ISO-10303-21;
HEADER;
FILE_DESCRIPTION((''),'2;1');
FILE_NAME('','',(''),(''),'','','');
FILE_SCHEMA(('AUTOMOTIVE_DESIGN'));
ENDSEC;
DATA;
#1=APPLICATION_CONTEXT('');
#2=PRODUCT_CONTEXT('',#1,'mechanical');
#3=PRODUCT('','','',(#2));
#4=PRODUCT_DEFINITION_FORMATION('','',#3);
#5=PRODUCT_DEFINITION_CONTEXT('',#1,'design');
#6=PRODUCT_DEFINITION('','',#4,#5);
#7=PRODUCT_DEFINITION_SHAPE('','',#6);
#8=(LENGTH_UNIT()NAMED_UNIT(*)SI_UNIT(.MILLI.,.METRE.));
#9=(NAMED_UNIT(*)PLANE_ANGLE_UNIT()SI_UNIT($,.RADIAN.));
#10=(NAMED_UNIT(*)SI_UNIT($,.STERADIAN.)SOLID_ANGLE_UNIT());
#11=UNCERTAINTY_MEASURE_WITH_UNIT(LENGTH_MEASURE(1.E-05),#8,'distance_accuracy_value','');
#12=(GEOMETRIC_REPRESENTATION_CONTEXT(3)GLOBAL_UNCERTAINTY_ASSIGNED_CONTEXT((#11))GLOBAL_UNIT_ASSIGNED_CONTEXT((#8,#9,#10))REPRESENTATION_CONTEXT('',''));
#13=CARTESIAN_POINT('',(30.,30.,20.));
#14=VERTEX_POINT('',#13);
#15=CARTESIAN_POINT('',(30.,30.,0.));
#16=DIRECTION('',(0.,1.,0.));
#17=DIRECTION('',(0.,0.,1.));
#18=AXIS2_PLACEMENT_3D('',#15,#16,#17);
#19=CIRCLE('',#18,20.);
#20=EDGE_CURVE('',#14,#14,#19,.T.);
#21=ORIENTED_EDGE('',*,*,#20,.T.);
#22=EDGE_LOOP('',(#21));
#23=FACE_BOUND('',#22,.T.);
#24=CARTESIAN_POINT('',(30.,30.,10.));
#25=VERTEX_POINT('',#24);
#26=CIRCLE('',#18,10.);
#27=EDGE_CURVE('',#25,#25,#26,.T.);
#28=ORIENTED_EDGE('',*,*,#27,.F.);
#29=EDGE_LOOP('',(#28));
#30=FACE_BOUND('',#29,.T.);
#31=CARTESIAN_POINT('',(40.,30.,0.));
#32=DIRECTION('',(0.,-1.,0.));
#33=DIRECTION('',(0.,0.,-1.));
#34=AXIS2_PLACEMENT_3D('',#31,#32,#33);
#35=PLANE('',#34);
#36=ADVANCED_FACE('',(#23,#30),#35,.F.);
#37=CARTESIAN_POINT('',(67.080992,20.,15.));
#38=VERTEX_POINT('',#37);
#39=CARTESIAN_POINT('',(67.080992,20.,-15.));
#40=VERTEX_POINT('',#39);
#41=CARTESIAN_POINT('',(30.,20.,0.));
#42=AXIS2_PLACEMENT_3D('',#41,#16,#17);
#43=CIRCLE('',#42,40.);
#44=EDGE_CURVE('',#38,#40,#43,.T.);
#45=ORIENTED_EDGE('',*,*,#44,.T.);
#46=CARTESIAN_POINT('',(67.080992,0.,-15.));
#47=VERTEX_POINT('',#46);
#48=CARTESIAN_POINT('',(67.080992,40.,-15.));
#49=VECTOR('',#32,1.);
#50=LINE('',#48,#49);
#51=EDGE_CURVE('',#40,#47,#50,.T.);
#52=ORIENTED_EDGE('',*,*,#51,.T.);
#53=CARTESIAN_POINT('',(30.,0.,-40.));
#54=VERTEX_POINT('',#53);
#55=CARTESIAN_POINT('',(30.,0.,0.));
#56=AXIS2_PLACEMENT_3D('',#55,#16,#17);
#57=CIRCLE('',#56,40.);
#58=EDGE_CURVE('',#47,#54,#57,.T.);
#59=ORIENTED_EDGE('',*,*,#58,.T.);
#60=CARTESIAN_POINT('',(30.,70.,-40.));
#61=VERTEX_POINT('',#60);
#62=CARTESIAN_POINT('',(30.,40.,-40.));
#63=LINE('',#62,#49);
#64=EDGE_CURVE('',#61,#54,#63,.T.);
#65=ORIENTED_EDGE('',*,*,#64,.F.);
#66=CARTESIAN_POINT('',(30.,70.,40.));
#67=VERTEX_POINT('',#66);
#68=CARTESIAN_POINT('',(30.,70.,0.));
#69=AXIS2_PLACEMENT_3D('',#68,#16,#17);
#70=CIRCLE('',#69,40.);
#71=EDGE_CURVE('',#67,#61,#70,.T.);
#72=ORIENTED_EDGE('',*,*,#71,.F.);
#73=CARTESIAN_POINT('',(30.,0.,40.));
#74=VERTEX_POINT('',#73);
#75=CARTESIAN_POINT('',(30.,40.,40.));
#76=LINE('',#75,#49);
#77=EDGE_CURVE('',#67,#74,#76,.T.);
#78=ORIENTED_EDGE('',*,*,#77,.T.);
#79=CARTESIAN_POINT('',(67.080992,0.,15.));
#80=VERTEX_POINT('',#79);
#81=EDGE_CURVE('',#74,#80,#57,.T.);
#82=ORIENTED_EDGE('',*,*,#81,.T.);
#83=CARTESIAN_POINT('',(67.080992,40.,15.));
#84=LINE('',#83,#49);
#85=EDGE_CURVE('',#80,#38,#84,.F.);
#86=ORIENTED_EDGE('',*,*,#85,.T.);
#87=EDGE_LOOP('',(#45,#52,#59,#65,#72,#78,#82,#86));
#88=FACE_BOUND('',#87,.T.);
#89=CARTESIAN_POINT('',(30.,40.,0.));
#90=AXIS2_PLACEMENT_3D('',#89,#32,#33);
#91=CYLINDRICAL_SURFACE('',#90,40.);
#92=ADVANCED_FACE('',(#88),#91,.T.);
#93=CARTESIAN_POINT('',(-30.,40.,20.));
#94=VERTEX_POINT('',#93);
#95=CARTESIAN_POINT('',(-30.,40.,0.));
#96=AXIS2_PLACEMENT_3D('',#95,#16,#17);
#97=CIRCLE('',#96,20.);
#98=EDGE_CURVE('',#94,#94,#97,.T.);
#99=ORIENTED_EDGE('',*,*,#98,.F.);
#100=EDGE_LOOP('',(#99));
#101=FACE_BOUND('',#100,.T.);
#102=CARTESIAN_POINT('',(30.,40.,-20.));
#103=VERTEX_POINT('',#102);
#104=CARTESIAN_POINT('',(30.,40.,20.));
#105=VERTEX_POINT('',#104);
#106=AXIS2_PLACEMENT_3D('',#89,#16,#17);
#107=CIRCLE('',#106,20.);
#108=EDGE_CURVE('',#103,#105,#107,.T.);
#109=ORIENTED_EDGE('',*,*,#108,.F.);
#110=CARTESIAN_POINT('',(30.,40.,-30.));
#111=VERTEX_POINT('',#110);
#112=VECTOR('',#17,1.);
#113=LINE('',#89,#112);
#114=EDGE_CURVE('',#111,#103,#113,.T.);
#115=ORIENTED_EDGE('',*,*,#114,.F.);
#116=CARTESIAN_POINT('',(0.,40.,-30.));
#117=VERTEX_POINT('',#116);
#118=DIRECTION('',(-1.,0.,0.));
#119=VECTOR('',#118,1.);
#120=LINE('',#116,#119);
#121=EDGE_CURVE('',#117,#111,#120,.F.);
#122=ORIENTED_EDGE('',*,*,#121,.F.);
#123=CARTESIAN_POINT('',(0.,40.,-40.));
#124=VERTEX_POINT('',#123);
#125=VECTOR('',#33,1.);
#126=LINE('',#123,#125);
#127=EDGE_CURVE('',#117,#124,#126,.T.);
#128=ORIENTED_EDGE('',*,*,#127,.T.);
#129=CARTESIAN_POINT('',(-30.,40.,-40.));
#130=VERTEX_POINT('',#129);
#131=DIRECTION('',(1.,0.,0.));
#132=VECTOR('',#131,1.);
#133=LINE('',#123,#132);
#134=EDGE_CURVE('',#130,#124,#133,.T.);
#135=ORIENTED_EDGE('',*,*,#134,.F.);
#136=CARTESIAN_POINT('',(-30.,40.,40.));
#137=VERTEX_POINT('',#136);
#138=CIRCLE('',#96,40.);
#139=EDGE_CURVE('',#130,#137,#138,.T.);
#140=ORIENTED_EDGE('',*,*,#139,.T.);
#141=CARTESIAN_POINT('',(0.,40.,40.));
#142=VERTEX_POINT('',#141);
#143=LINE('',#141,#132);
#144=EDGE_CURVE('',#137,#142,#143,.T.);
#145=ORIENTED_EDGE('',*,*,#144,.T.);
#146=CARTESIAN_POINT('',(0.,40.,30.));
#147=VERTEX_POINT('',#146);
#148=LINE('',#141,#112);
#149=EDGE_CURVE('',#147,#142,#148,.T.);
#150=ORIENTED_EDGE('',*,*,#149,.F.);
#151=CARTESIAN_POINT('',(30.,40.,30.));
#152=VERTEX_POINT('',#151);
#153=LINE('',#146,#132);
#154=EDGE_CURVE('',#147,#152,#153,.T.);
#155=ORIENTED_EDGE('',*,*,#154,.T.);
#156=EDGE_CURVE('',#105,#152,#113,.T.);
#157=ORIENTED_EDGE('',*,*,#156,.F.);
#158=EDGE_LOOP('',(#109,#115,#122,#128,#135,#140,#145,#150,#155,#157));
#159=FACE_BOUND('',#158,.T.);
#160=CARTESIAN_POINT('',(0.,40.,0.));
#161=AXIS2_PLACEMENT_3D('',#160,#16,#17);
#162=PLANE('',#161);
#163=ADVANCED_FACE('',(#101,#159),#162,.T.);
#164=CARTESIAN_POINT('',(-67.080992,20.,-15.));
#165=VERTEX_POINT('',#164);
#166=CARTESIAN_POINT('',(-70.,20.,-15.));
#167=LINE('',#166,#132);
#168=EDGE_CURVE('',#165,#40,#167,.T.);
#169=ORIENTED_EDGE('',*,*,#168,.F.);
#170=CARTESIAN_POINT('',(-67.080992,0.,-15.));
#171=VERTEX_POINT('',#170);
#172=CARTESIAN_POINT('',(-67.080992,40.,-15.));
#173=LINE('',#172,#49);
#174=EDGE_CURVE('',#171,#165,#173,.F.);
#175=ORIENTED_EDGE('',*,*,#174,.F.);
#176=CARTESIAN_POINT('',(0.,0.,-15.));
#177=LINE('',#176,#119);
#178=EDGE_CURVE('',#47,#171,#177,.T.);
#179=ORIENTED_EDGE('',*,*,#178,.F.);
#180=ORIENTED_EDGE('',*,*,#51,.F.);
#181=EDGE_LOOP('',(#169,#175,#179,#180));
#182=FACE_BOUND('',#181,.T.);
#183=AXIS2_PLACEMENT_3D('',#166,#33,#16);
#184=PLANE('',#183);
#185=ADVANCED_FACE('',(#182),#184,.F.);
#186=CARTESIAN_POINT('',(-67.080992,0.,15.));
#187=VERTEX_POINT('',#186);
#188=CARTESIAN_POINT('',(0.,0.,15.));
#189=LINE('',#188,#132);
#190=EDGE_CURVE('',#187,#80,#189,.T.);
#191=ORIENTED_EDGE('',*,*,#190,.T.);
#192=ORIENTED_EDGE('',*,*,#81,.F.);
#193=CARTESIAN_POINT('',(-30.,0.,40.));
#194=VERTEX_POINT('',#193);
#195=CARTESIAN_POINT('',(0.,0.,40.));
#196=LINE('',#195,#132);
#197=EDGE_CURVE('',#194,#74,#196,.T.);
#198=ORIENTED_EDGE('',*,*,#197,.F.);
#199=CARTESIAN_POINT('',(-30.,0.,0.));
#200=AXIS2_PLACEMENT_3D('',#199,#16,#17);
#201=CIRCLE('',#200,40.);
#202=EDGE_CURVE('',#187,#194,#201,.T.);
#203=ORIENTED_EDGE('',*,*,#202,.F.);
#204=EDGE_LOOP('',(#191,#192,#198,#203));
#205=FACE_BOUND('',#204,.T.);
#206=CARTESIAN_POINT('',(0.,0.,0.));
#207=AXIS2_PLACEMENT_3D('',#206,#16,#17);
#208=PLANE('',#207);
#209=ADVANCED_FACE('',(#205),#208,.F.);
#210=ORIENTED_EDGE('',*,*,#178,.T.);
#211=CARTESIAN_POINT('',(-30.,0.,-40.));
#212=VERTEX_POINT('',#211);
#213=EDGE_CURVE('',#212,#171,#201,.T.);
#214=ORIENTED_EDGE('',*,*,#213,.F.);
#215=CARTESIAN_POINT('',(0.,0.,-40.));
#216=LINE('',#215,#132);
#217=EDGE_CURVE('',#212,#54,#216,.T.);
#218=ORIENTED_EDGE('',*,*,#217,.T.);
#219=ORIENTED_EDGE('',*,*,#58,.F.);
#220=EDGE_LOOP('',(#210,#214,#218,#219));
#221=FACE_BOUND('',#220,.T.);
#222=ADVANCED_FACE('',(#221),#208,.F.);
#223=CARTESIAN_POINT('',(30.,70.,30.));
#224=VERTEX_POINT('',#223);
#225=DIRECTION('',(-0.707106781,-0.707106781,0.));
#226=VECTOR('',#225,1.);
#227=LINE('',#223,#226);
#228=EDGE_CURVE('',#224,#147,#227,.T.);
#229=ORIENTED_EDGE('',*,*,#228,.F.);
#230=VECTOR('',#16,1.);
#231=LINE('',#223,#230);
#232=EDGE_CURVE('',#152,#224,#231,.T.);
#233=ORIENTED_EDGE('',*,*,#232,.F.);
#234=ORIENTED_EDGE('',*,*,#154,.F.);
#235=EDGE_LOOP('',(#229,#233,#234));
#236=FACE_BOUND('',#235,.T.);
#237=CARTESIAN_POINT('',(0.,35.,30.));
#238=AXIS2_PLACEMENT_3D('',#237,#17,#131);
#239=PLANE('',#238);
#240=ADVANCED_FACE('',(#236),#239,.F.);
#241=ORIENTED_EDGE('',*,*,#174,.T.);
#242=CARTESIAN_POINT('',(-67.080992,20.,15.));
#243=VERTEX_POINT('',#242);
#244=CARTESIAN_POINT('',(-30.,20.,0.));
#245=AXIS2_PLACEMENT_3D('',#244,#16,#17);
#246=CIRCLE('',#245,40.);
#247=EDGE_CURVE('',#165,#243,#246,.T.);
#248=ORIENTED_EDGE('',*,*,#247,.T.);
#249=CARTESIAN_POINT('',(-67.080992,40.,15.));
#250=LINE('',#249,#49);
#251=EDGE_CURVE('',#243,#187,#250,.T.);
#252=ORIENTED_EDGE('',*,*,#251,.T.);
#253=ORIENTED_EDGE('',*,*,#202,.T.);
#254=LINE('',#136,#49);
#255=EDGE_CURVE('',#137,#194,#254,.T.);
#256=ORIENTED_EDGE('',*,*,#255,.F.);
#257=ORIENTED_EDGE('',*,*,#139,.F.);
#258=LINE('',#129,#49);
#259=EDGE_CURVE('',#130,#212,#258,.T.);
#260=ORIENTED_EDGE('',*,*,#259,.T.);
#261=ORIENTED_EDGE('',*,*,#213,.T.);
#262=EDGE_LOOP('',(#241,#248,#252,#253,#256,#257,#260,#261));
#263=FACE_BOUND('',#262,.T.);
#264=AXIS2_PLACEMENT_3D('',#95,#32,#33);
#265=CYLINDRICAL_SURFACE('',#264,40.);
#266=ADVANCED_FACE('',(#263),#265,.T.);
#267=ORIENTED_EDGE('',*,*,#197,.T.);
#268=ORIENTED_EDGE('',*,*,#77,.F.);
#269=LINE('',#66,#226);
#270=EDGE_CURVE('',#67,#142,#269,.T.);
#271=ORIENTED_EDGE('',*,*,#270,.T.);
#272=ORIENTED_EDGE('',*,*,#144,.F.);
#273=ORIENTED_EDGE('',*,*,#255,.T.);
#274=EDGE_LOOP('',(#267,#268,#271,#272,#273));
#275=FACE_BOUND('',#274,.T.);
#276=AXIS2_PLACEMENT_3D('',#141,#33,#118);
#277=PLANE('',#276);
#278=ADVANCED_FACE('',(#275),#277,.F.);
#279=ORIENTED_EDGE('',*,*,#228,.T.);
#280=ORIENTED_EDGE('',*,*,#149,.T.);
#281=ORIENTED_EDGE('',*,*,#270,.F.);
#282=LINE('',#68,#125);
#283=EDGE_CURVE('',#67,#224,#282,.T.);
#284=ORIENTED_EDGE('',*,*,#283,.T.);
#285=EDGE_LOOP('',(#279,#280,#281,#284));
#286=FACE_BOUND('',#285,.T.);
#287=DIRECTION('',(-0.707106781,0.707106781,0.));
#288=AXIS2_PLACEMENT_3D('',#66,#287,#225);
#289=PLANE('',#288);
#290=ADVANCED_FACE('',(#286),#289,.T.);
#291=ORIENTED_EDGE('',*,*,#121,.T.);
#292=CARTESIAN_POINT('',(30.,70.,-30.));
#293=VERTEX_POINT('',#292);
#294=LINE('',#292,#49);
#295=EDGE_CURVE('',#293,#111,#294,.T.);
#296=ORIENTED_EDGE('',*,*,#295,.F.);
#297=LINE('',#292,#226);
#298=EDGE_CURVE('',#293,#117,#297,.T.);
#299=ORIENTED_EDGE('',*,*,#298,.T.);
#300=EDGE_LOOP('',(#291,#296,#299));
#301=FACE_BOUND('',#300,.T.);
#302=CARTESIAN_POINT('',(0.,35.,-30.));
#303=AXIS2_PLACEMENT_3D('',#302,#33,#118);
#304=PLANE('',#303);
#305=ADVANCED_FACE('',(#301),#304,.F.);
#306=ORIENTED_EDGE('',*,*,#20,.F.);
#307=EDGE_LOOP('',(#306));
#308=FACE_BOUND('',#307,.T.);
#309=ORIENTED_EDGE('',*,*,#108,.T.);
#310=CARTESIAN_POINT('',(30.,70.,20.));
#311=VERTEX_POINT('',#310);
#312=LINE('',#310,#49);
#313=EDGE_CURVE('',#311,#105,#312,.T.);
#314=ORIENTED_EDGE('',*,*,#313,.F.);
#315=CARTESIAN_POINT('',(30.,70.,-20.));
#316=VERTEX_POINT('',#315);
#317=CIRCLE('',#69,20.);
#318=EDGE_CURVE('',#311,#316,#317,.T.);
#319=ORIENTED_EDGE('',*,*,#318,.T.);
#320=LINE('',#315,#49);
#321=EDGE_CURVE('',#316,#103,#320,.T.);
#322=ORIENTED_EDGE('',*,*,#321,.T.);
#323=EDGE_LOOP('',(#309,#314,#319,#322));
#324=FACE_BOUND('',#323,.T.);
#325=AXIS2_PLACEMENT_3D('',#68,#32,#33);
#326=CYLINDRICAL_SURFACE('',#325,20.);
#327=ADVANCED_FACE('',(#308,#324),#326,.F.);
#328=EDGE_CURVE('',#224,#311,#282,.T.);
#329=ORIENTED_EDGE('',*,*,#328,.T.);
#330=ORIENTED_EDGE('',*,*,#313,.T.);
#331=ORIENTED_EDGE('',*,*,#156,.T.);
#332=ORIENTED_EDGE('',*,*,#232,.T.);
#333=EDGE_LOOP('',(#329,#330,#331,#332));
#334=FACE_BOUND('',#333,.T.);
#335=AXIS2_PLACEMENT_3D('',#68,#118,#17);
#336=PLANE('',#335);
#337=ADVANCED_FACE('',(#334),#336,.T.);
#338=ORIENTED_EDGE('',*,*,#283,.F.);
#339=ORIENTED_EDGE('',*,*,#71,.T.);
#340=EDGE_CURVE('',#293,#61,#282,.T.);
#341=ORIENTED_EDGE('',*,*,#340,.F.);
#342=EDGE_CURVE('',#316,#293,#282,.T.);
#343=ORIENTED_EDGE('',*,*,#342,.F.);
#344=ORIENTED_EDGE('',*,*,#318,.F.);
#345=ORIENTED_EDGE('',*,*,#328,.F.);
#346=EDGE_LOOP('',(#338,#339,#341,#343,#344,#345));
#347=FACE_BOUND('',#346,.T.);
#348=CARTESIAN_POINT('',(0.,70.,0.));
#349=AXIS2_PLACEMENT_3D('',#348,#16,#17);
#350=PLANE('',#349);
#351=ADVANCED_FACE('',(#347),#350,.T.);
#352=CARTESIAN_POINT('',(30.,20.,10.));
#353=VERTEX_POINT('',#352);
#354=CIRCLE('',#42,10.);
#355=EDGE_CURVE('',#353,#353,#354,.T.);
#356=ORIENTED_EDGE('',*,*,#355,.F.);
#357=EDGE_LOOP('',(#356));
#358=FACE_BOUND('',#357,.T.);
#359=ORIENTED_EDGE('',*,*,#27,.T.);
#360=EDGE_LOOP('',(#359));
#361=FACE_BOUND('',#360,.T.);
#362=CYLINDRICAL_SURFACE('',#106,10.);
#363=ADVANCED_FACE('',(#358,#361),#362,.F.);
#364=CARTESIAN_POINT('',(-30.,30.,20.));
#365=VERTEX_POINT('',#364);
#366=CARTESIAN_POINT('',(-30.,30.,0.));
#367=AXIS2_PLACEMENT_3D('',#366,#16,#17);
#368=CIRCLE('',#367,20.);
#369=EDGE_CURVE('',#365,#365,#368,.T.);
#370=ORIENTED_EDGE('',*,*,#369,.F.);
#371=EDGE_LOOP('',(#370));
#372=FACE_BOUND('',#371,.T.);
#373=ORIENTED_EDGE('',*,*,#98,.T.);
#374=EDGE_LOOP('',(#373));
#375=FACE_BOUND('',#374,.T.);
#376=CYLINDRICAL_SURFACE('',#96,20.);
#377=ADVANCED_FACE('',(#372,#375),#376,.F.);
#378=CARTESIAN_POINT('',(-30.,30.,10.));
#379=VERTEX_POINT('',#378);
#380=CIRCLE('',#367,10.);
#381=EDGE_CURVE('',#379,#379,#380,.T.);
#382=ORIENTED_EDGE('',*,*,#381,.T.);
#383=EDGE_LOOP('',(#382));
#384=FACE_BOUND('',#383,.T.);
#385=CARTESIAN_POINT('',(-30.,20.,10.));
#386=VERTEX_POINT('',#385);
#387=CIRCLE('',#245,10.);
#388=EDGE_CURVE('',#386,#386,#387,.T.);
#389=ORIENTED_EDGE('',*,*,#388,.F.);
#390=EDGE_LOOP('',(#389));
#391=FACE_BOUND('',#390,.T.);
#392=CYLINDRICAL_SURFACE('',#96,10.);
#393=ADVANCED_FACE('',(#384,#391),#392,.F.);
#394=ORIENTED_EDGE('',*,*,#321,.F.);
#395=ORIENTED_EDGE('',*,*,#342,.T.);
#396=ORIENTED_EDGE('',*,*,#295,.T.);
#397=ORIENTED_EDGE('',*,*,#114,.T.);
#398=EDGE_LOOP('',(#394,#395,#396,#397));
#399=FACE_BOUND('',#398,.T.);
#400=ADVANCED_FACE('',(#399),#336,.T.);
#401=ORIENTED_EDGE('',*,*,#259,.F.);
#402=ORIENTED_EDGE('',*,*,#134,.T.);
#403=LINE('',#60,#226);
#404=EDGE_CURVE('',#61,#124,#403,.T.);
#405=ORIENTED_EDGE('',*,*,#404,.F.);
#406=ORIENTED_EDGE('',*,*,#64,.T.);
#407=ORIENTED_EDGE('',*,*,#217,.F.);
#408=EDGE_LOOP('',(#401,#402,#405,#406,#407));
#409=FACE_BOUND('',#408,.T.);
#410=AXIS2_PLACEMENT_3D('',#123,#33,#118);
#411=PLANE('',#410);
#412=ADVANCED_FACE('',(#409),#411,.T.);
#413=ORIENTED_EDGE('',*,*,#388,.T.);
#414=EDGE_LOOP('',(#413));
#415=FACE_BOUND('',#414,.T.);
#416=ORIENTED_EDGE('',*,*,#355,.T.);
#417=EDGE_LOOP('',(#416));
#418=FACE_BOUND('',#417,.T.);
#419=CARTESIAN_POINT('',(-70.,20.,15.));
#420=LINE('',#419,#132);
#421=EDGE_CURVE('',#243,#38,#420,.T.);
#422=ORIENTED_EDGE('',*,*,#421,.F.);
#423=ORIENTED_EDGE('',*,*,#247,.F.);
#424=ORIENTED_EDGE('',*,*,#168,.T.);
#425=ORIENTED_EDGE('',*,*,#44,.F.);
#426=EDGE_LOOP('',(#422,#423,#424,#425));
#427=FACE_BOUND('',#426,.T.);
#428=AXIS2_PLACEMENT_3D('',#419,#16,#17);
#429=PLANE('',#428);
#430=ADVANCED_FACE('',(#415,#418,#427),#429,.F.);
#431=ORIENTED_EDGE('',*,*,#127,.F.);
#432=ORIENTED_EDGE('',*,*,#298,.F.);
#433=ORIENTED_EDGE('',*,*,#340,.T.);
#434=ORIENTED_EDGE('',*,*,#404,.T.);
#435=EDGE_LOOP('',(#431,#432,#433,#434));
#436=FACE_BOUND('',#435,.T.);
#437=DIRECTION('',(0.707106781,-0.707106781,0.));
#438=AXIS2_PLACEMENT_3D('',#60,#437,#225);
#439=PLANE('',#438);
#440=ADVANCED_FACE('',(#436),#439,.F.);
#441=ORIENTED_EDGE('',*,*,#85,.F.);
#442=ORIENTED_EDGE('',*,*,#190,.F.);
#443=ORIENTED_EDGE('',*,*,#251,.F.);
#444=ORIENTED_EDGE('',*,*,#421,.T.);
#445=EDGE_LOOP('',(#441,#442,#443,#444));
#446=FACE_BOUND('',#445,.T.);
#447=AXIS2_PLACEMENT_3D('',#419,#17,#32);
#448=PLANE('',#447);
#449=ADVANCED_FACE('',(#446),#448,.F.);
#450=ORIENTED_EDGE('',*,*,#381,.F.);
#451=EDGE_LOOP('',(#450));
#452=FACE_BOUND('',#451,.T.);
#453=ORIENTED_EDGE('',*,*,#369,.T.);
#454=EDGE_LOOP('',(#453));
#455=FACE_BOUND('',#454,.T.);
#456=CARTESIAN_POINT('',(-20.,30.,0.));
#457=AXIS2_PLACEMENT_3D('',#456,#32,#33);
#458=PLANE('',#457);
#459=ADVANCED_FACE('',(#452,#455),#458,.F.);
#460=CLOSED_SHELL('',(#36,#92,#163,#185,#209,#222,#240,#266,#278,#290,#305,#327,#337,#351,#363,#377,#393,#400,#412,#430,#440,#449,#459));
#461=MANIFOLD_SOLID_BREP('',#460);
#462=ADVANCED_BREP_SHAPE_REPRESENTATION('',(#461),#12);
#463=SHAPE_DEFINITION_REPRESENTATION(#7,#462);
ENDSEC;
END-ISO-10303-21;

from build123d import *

# Parameters (mm, degrees)
BOSS_EXTRUDE1_DEPTH                     = 40
BOSS_EXTRUDE2_DEPTH                     = 70
RIB7_START                              = -10
RIB7_DEPTH                              = 10
CUT_EXTRUDE1_DEPTH                      = 107.77078252
CUT_EXTRUDE1_DEPTH_BACK                 = 107.77078252
SKETCH3_W                               = 30
SKETCH3_H                               = 20
CBORE_FOR_M5_HEX_HEAD_BOLT1_D           = 20
CBORE_FOR_M5_HEX_HEAD_BOLT1_DEPTH       = 20
CBORE_FOR_M5_HEX_HEAD_BOLT1_CBORE_D     = 40
CBORE_FOR_M5_HEX_HEAD_BOLT1_CBORE_DEPTH = 10
CBORE_FOR_M5_HEX_HEAD_BOLT1_TIP         = 5.773502692


# Read off the part's stored shape, not the designer's step: Rib7
with BuildPart() as part:
    # Sketch1 → Boss-Extrude1 (new body)
    with BuildSketch(Plane(origin=(0, 0, 0), x_dir=(1, 0, 0), z_dir=(0, 1, 0))):
        with BuildLine():
            Line((30, -40), (30, -20))
            ThreePointArc((30, -20), (50, 0), (30, 20))
            Line((30, 20), (30, 40))
            Line((30, 40), (-30, 40))
            ThreePointArc((-30, 40), (-70, 0), (-30, -40))
            Line((-30, -40), (30, -40))
        make_face()
        with BuildLine():
            ThreePointArc((30, -20), (50, 0), (30, 20))
            Line((30, 20), (30, 40))
            ThreePointArc((30, 40), (70, 0), (30, -40))
            Line((30, -40), (30, -20))
        make_face()
    extrude(amount=BOSS_EXTRUDE1_DEPTH)

    # Sketch1<3> → Boss-Extrude2 (add)
    with BuildSketch(Plane(origin=(0, 0, 0), x_dir=(1, 0, 0), z_dir=(0, 1, 0))):
        with BuildLine():
            ThreePointArc((30, -20), (50, 0), (30, 20))
            Line((30, 20), (30, 40))
            ThreePointArc((30, 40), (70, 0), (30, -40))
            Line((30, -40), (30, -20))
        make_face()
    extrude(amount=BOSS_EXTRUDE2_DEPTH)

    # Rib7 outline → Rib7 (add)
    with BuildSketch(Plane(origin=(0, 0, -40), x_dir=(-1, 0, 0), z_dir=(0, 0, -1)).offset(RIB7_START)):
        Polygon((0, 40), (-30, 70), (-30, 40), align=None)
    rib7 = extrude(amount=RIB7_DEPTH)

    # Mirror1: Rib7 across plane
    add(rib7.mirror(Plane.XY))

    # Sketch3 → Cut-Extrude1 (cut, two sides: drawn at the far end of the back side and taken through both)
    with BuildSketch(Plane(origin=(0, 0, 0), x_dir=(0, 0, -1), z_dir=(1, 0, 0)).offset(-CUT_EXTRUDE1_DEPTH_BACK)):
        with Locations((0, 10)):
            Rectangle(SKETCH3_W, SKETCH3_H)
    extrude(amount=CUT_EXTRUDE1_DEPTH + CUT_EXTRUDE1_DEPTH_BACK, mode=Mode.SUBTRACT)

    # CBORE for M5 Hex Head Bolt1
    with Locations(Plane(origin=(0, 40, 0), x_dir=(1, 0, 0), z_dir=(0, 1, 0))):
        with Locations((30, 0), (-30, 0)):
            CounterBoreHole(CBORE_FOR_M5_HEX_HEAD_BOLT1_D / 2, CBORE_FOR_M5_HEX_HEAD_BOLT1_CBORE_D / 2, CBORE_FOR_M5_HEX_HEAD_BOLT1_CBORE_DEPTH, depth=CBORE_FOR_M5_HEX_HEAD_BOLT1_DEPTH)
            with Locations((0, 0, -(CBORE_FOR_M5_HEX_HEAD_BOLT1_DEPTH + CBORE_FOR_M5_HEX_HEAD_BOLT1_TIP / 2))):  # 120° drill point
                Cone(0, CBORE_FOR_M5_HEX_HEAD_BOLT1_D / 2, CBORE_FOR_M5_HEX_HEAD_BOLT1_TIP, mode=Mode.SUBTRACT)


solid = part.part
